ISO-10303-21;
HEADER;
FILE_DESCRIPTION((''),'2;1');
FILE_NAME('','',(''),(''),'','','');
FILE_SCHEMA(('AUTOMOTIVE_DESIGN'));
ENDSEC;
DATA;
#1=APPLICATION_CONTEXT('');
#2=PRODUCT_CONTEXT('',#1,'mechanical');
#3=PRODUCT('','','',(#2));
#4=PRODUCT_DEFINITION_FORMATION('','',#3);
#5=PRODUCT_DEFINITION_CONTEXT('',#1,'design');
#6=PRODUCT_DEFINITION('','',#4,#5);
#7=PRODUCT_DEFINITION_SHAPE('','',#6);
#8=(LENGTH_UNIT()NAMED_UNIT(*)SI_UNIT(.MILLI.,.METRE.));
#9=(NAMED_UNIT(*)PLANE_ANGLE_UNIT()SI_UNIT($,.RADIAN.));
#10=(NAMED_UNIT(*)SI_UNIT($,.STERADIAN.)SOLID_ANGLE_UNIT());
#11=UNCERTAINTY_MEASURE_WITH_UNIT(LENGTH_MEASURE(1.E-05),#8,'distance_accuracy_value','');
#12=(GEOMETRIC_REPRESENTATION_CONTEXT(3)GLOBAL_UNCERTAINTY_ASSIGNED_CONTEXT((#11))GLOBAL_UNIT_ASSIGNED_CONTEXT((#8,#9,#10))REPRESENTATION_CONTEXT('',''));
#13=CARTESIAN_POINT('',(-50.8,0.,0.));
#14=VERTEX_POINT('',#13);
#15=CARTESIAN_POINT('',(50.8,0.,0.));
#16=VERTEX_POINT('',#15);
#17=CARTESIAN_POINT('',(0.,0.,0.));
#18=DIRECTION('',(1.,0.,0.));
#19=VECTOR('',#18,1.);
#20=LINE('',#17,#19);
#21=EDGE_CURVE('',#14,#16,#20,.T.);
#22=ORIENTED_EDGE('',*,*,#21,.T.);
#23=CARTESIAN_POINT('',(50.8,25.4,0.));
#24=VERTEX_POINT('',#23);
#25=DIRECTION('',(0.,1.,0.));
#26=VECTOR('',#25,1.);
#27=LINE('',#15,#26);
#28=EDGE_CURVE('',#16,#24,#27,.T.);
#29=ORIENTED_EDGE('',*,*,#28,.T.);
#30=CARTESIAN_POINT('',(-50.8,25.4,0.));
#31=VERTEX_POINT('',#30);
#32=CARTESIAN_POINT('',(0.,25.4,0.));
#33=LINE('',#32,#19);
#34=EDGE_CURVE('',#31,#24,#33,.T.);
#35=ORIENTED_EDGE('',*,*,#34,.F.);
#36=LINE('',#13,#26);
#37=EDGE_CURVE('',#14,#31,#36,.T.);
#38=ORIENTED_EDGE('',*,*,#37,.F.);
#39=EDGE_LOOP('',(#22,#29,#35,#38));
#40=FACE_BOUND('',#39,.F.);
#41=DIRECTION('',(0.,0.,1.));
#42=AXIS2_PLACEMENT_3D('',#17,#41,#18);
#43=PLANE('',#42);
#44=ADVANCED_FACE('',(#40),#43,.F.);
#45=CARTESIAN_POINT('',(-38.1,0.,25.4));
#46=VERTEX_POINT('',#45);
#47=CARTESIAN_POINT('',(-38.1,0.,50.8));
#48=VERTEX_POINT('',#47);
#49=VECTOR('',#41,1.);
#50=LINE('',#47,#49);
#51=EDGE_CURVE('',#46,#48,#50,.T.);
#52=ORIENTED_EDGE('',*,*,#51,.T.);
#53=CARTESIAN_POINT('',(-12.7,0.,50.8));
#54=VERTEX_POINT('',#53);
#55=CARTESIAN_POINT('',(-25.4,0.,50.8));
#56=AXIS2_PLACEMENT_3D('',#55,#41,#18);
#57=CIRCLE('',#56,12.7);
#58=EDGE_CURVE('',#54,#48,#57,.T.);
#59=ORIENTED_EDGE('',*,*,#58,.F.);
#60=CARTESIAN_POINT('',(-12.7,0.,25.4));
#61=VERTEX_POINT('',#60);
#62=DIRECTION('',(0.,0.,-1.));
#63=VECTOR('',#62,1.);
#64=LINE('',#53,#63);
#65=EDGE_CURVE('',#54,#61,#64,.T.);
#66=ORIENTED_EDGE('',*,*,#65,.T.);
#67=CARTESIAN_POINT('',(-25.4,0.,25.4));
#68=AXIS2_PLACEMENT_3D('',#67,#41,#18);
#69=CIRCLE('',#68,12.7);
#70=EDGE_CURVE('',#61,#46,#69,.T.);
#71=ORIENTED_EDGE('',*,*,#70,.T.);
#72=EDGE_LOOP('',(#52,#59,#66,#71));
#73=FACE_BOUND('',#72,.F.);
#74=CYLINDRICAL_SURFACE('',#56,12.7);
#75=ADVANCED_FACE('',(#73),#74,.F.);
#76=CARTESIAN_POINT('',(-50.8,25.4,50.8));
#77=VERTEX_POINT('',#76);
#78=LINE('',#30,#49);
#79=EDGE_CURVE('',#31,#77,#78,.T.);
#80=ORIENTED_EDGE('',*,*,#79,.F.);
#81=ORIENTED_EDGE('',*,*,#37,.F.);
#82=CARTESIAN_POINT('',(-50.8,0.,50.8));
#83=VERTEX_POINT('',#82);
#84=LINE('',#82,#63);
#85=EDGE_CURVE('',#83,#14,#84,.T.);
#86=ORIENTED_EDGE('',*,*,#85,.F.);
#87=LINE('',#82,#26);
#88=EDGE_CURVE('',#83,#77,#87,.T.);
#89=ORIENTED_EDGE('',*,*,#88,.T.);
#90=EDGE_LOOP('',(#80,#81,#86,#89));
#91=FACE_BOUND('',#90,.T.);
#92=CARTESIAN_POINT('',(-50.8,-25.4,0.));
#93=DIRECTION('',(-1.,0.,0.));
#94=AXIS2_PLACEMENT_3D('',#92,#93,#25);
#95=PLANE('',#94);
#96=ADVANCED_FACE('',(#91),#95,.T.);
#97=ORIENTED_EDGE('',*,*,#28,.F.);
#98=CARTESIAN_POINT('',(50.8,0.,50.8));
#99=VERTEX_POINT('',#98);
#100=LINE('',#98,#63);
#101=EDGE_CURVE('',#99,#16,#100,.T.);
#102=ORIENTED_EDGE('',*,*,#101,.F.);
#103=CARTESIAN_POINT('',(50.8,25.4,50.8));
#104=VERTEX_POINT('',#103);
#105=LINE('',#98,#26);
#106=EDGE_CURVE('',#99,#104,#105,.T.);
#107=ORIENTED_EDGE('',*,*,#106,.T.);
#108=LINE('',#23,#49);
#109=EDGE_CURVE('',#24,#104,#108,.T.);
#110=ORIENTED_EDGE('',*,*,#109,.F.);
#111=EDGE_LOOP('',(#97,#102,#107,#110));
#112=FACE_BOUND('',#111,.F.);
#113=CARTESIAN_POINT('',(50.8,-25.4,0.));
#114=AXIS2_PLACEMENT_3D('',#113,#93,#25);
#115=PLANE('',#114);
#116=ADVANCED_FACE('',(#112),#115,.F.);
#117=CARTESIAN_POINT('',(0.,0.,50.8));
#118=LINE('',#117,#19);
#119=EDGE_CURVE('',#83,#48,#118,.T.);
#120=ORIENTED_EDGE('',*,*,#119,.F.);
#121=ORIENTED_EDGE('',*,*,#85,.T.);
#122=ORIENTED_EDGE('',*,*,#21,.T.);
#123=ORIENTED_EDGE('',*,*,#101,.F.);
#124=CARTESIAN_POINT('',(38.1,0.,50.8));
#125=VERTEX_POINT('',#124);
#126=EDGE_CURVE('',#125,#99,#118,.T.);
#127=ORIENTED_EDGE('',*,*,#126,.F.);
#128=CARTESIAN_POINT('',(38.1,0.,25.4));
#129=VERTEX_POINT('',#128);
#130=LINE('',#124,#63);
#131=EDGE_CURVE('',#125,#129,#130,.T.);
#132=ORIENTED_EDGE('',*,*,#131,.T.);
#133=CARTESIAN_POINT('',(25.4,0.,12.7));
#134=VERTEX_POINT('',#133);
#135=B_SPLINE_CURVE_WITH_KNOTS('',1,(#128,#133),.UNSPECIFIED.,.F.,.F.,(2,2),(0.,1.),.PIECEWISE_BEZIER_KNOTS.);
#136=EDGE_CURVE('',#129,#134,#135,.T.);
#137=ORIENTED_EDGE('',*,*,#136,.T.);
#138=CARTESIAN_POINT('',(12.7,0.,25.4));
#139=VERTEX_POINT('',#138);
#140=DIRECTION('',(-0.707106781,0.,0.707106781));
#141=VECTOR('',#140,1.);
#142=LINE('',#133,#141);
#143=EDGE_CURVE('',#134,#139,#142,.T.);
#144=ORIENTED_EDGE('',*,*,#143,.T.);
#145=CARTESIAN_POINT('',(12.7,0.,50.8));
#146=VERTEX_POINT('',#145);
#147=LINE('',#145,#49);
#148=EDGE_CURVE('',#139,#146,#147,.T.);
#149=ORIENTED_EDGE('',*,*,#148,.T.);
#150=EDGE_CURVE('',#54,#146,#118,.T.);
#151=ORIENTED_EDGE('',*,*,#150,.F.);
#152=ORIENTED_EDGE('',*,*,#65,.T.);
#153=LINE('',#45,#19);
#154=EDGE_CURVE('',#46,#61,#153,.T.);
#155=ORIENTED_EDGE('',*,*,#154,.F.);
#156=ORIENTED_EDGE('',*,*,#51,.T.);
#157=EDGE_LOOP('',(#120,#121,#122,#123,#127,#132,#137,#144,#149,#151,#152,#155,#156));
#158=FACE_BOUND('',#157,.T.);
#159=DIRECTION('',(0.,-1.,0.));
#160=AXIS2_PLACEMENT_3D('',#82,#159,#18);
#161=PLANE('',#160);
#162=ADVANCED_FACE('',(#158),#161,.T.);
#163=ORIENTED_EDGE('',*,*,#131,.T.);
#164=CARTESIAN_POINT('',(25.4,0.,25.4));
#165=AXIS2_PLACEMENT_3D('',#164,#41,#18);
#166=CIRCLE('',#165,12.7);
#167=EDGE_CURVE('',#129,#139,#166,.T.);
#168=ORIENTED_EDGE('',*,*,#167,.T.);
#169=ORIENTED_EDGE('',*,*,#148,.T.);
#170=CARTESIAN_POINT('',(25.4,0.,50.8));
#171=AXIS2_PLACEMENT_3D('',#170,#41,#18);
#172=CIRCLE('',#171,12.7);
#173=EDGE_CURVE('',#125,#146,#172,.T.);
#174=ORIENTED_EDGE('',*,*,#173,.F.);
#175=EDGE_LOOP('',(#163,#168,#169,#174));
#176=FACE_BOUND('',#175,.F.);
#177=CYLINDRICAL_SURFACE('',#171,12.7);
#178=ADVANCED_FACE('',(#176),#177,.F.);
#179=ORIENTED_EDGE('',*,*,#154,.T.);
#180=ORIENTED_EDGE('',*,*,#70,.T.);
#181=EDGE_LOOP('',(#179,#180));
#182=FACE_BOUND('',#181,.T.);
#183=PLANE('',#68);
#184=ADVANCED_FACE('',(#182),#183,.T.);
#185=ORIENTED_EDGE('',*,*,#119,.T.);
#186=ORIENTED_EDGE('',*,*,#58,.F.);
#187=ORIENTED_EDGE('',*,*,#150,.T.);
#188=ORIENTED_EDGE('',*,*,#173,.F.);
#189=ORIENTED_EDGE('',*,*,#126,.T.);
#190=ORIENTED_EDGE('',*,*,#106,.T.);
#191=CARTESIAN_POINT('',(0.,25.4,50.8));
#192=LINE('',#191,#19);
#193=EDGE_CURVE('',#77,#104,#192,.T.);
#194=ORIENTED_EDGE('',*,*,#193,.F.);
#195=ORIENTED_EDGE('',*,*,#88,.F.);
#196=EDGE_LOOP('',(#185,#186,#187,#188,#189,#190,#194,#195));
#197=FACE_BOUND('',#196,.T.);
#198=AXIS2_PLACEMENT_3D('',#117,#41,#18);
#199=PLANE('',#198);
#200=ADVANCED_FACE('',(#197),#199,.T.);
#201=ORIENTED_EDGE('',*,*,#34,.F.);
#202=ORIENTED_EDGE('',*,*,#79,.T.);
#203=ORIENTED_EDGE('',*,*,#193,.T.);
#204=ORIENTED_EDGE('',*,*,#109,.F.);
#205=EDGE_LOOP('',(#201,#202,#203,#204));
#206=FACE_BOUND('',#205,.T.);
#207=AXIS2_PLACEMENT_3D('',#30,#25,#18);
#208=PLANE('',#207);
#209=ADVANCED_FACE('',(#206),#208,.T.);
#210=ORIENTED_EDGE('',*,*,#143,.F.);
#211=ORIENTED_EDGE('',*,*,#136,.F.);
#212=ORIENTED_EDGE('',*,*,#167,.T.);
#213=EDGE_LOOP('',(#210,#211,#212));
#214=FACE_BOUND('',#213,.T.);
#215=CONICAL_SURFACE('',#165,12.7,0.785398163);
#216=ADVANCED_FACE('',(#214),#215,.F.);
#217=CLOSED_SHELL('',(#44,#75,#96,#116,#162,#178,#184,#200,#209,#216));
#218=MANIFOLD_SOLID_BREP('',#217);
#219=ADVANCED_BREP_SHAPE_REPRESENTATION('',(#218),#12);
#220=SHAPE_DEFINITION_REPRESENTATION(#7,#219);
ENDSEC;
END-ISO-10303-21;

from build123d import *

# Parameters (mm, degrees)
F0_W     = 101.6
F0_H     = 50.8
F1_DEPTH = 50.8
F2_R     = 12.7
F3_DEPTH = 25.4
F5_R     = 12.7
F4_W     = 101.6
F4_H     = 25.4
F7_DEPTH = 50.8


# Not quite as in the source:
# - an extrude whose draft closes it to a point is written as a loft to that point


with BuildPart() as f1:
    # F0 (on Top) → F1 (new body)
    with BuildSketch(Plane.XY):
        Rectangle(F0_W, F0_H)
    extrude(amount=F1_DEPTH)

    # F2 (on face) → F3 (cut)
    with BuildSketch(Plane.XY.offset(50.8)):
        with Locations((-25.4, 0)):
            Circle(F2_R)
        with Locations((25.4, 0)):
            Circle(F2_R)
    extrude(amount=-F3_DEPTH, mode=Mode.SUBTRACT)

    # F5 (on face) → F6 section 0
    with BuildSketch(Plane.XY.offset(25.4), mode=Mode.PRIVATE) as f6_s0:
        with Locations((25.4, 0)):
            Circle(F5_R)
    loft([f6_s0.sketch, Vertex(25.4, 0, 12.7)], ruled=True, mode=Mode.SUBTRACT)

    # F4 (on face) → F7 (cut, through all)
    with BuildSketch(Plane.XY.offset(50.8)):
        with Locations((0, -12.7)):
            Rectangle(F4_W, F4_H)
    extrude(amount=-F7_DEPTH, mode=Mode.SUBTRACT)


solid = f1.part
